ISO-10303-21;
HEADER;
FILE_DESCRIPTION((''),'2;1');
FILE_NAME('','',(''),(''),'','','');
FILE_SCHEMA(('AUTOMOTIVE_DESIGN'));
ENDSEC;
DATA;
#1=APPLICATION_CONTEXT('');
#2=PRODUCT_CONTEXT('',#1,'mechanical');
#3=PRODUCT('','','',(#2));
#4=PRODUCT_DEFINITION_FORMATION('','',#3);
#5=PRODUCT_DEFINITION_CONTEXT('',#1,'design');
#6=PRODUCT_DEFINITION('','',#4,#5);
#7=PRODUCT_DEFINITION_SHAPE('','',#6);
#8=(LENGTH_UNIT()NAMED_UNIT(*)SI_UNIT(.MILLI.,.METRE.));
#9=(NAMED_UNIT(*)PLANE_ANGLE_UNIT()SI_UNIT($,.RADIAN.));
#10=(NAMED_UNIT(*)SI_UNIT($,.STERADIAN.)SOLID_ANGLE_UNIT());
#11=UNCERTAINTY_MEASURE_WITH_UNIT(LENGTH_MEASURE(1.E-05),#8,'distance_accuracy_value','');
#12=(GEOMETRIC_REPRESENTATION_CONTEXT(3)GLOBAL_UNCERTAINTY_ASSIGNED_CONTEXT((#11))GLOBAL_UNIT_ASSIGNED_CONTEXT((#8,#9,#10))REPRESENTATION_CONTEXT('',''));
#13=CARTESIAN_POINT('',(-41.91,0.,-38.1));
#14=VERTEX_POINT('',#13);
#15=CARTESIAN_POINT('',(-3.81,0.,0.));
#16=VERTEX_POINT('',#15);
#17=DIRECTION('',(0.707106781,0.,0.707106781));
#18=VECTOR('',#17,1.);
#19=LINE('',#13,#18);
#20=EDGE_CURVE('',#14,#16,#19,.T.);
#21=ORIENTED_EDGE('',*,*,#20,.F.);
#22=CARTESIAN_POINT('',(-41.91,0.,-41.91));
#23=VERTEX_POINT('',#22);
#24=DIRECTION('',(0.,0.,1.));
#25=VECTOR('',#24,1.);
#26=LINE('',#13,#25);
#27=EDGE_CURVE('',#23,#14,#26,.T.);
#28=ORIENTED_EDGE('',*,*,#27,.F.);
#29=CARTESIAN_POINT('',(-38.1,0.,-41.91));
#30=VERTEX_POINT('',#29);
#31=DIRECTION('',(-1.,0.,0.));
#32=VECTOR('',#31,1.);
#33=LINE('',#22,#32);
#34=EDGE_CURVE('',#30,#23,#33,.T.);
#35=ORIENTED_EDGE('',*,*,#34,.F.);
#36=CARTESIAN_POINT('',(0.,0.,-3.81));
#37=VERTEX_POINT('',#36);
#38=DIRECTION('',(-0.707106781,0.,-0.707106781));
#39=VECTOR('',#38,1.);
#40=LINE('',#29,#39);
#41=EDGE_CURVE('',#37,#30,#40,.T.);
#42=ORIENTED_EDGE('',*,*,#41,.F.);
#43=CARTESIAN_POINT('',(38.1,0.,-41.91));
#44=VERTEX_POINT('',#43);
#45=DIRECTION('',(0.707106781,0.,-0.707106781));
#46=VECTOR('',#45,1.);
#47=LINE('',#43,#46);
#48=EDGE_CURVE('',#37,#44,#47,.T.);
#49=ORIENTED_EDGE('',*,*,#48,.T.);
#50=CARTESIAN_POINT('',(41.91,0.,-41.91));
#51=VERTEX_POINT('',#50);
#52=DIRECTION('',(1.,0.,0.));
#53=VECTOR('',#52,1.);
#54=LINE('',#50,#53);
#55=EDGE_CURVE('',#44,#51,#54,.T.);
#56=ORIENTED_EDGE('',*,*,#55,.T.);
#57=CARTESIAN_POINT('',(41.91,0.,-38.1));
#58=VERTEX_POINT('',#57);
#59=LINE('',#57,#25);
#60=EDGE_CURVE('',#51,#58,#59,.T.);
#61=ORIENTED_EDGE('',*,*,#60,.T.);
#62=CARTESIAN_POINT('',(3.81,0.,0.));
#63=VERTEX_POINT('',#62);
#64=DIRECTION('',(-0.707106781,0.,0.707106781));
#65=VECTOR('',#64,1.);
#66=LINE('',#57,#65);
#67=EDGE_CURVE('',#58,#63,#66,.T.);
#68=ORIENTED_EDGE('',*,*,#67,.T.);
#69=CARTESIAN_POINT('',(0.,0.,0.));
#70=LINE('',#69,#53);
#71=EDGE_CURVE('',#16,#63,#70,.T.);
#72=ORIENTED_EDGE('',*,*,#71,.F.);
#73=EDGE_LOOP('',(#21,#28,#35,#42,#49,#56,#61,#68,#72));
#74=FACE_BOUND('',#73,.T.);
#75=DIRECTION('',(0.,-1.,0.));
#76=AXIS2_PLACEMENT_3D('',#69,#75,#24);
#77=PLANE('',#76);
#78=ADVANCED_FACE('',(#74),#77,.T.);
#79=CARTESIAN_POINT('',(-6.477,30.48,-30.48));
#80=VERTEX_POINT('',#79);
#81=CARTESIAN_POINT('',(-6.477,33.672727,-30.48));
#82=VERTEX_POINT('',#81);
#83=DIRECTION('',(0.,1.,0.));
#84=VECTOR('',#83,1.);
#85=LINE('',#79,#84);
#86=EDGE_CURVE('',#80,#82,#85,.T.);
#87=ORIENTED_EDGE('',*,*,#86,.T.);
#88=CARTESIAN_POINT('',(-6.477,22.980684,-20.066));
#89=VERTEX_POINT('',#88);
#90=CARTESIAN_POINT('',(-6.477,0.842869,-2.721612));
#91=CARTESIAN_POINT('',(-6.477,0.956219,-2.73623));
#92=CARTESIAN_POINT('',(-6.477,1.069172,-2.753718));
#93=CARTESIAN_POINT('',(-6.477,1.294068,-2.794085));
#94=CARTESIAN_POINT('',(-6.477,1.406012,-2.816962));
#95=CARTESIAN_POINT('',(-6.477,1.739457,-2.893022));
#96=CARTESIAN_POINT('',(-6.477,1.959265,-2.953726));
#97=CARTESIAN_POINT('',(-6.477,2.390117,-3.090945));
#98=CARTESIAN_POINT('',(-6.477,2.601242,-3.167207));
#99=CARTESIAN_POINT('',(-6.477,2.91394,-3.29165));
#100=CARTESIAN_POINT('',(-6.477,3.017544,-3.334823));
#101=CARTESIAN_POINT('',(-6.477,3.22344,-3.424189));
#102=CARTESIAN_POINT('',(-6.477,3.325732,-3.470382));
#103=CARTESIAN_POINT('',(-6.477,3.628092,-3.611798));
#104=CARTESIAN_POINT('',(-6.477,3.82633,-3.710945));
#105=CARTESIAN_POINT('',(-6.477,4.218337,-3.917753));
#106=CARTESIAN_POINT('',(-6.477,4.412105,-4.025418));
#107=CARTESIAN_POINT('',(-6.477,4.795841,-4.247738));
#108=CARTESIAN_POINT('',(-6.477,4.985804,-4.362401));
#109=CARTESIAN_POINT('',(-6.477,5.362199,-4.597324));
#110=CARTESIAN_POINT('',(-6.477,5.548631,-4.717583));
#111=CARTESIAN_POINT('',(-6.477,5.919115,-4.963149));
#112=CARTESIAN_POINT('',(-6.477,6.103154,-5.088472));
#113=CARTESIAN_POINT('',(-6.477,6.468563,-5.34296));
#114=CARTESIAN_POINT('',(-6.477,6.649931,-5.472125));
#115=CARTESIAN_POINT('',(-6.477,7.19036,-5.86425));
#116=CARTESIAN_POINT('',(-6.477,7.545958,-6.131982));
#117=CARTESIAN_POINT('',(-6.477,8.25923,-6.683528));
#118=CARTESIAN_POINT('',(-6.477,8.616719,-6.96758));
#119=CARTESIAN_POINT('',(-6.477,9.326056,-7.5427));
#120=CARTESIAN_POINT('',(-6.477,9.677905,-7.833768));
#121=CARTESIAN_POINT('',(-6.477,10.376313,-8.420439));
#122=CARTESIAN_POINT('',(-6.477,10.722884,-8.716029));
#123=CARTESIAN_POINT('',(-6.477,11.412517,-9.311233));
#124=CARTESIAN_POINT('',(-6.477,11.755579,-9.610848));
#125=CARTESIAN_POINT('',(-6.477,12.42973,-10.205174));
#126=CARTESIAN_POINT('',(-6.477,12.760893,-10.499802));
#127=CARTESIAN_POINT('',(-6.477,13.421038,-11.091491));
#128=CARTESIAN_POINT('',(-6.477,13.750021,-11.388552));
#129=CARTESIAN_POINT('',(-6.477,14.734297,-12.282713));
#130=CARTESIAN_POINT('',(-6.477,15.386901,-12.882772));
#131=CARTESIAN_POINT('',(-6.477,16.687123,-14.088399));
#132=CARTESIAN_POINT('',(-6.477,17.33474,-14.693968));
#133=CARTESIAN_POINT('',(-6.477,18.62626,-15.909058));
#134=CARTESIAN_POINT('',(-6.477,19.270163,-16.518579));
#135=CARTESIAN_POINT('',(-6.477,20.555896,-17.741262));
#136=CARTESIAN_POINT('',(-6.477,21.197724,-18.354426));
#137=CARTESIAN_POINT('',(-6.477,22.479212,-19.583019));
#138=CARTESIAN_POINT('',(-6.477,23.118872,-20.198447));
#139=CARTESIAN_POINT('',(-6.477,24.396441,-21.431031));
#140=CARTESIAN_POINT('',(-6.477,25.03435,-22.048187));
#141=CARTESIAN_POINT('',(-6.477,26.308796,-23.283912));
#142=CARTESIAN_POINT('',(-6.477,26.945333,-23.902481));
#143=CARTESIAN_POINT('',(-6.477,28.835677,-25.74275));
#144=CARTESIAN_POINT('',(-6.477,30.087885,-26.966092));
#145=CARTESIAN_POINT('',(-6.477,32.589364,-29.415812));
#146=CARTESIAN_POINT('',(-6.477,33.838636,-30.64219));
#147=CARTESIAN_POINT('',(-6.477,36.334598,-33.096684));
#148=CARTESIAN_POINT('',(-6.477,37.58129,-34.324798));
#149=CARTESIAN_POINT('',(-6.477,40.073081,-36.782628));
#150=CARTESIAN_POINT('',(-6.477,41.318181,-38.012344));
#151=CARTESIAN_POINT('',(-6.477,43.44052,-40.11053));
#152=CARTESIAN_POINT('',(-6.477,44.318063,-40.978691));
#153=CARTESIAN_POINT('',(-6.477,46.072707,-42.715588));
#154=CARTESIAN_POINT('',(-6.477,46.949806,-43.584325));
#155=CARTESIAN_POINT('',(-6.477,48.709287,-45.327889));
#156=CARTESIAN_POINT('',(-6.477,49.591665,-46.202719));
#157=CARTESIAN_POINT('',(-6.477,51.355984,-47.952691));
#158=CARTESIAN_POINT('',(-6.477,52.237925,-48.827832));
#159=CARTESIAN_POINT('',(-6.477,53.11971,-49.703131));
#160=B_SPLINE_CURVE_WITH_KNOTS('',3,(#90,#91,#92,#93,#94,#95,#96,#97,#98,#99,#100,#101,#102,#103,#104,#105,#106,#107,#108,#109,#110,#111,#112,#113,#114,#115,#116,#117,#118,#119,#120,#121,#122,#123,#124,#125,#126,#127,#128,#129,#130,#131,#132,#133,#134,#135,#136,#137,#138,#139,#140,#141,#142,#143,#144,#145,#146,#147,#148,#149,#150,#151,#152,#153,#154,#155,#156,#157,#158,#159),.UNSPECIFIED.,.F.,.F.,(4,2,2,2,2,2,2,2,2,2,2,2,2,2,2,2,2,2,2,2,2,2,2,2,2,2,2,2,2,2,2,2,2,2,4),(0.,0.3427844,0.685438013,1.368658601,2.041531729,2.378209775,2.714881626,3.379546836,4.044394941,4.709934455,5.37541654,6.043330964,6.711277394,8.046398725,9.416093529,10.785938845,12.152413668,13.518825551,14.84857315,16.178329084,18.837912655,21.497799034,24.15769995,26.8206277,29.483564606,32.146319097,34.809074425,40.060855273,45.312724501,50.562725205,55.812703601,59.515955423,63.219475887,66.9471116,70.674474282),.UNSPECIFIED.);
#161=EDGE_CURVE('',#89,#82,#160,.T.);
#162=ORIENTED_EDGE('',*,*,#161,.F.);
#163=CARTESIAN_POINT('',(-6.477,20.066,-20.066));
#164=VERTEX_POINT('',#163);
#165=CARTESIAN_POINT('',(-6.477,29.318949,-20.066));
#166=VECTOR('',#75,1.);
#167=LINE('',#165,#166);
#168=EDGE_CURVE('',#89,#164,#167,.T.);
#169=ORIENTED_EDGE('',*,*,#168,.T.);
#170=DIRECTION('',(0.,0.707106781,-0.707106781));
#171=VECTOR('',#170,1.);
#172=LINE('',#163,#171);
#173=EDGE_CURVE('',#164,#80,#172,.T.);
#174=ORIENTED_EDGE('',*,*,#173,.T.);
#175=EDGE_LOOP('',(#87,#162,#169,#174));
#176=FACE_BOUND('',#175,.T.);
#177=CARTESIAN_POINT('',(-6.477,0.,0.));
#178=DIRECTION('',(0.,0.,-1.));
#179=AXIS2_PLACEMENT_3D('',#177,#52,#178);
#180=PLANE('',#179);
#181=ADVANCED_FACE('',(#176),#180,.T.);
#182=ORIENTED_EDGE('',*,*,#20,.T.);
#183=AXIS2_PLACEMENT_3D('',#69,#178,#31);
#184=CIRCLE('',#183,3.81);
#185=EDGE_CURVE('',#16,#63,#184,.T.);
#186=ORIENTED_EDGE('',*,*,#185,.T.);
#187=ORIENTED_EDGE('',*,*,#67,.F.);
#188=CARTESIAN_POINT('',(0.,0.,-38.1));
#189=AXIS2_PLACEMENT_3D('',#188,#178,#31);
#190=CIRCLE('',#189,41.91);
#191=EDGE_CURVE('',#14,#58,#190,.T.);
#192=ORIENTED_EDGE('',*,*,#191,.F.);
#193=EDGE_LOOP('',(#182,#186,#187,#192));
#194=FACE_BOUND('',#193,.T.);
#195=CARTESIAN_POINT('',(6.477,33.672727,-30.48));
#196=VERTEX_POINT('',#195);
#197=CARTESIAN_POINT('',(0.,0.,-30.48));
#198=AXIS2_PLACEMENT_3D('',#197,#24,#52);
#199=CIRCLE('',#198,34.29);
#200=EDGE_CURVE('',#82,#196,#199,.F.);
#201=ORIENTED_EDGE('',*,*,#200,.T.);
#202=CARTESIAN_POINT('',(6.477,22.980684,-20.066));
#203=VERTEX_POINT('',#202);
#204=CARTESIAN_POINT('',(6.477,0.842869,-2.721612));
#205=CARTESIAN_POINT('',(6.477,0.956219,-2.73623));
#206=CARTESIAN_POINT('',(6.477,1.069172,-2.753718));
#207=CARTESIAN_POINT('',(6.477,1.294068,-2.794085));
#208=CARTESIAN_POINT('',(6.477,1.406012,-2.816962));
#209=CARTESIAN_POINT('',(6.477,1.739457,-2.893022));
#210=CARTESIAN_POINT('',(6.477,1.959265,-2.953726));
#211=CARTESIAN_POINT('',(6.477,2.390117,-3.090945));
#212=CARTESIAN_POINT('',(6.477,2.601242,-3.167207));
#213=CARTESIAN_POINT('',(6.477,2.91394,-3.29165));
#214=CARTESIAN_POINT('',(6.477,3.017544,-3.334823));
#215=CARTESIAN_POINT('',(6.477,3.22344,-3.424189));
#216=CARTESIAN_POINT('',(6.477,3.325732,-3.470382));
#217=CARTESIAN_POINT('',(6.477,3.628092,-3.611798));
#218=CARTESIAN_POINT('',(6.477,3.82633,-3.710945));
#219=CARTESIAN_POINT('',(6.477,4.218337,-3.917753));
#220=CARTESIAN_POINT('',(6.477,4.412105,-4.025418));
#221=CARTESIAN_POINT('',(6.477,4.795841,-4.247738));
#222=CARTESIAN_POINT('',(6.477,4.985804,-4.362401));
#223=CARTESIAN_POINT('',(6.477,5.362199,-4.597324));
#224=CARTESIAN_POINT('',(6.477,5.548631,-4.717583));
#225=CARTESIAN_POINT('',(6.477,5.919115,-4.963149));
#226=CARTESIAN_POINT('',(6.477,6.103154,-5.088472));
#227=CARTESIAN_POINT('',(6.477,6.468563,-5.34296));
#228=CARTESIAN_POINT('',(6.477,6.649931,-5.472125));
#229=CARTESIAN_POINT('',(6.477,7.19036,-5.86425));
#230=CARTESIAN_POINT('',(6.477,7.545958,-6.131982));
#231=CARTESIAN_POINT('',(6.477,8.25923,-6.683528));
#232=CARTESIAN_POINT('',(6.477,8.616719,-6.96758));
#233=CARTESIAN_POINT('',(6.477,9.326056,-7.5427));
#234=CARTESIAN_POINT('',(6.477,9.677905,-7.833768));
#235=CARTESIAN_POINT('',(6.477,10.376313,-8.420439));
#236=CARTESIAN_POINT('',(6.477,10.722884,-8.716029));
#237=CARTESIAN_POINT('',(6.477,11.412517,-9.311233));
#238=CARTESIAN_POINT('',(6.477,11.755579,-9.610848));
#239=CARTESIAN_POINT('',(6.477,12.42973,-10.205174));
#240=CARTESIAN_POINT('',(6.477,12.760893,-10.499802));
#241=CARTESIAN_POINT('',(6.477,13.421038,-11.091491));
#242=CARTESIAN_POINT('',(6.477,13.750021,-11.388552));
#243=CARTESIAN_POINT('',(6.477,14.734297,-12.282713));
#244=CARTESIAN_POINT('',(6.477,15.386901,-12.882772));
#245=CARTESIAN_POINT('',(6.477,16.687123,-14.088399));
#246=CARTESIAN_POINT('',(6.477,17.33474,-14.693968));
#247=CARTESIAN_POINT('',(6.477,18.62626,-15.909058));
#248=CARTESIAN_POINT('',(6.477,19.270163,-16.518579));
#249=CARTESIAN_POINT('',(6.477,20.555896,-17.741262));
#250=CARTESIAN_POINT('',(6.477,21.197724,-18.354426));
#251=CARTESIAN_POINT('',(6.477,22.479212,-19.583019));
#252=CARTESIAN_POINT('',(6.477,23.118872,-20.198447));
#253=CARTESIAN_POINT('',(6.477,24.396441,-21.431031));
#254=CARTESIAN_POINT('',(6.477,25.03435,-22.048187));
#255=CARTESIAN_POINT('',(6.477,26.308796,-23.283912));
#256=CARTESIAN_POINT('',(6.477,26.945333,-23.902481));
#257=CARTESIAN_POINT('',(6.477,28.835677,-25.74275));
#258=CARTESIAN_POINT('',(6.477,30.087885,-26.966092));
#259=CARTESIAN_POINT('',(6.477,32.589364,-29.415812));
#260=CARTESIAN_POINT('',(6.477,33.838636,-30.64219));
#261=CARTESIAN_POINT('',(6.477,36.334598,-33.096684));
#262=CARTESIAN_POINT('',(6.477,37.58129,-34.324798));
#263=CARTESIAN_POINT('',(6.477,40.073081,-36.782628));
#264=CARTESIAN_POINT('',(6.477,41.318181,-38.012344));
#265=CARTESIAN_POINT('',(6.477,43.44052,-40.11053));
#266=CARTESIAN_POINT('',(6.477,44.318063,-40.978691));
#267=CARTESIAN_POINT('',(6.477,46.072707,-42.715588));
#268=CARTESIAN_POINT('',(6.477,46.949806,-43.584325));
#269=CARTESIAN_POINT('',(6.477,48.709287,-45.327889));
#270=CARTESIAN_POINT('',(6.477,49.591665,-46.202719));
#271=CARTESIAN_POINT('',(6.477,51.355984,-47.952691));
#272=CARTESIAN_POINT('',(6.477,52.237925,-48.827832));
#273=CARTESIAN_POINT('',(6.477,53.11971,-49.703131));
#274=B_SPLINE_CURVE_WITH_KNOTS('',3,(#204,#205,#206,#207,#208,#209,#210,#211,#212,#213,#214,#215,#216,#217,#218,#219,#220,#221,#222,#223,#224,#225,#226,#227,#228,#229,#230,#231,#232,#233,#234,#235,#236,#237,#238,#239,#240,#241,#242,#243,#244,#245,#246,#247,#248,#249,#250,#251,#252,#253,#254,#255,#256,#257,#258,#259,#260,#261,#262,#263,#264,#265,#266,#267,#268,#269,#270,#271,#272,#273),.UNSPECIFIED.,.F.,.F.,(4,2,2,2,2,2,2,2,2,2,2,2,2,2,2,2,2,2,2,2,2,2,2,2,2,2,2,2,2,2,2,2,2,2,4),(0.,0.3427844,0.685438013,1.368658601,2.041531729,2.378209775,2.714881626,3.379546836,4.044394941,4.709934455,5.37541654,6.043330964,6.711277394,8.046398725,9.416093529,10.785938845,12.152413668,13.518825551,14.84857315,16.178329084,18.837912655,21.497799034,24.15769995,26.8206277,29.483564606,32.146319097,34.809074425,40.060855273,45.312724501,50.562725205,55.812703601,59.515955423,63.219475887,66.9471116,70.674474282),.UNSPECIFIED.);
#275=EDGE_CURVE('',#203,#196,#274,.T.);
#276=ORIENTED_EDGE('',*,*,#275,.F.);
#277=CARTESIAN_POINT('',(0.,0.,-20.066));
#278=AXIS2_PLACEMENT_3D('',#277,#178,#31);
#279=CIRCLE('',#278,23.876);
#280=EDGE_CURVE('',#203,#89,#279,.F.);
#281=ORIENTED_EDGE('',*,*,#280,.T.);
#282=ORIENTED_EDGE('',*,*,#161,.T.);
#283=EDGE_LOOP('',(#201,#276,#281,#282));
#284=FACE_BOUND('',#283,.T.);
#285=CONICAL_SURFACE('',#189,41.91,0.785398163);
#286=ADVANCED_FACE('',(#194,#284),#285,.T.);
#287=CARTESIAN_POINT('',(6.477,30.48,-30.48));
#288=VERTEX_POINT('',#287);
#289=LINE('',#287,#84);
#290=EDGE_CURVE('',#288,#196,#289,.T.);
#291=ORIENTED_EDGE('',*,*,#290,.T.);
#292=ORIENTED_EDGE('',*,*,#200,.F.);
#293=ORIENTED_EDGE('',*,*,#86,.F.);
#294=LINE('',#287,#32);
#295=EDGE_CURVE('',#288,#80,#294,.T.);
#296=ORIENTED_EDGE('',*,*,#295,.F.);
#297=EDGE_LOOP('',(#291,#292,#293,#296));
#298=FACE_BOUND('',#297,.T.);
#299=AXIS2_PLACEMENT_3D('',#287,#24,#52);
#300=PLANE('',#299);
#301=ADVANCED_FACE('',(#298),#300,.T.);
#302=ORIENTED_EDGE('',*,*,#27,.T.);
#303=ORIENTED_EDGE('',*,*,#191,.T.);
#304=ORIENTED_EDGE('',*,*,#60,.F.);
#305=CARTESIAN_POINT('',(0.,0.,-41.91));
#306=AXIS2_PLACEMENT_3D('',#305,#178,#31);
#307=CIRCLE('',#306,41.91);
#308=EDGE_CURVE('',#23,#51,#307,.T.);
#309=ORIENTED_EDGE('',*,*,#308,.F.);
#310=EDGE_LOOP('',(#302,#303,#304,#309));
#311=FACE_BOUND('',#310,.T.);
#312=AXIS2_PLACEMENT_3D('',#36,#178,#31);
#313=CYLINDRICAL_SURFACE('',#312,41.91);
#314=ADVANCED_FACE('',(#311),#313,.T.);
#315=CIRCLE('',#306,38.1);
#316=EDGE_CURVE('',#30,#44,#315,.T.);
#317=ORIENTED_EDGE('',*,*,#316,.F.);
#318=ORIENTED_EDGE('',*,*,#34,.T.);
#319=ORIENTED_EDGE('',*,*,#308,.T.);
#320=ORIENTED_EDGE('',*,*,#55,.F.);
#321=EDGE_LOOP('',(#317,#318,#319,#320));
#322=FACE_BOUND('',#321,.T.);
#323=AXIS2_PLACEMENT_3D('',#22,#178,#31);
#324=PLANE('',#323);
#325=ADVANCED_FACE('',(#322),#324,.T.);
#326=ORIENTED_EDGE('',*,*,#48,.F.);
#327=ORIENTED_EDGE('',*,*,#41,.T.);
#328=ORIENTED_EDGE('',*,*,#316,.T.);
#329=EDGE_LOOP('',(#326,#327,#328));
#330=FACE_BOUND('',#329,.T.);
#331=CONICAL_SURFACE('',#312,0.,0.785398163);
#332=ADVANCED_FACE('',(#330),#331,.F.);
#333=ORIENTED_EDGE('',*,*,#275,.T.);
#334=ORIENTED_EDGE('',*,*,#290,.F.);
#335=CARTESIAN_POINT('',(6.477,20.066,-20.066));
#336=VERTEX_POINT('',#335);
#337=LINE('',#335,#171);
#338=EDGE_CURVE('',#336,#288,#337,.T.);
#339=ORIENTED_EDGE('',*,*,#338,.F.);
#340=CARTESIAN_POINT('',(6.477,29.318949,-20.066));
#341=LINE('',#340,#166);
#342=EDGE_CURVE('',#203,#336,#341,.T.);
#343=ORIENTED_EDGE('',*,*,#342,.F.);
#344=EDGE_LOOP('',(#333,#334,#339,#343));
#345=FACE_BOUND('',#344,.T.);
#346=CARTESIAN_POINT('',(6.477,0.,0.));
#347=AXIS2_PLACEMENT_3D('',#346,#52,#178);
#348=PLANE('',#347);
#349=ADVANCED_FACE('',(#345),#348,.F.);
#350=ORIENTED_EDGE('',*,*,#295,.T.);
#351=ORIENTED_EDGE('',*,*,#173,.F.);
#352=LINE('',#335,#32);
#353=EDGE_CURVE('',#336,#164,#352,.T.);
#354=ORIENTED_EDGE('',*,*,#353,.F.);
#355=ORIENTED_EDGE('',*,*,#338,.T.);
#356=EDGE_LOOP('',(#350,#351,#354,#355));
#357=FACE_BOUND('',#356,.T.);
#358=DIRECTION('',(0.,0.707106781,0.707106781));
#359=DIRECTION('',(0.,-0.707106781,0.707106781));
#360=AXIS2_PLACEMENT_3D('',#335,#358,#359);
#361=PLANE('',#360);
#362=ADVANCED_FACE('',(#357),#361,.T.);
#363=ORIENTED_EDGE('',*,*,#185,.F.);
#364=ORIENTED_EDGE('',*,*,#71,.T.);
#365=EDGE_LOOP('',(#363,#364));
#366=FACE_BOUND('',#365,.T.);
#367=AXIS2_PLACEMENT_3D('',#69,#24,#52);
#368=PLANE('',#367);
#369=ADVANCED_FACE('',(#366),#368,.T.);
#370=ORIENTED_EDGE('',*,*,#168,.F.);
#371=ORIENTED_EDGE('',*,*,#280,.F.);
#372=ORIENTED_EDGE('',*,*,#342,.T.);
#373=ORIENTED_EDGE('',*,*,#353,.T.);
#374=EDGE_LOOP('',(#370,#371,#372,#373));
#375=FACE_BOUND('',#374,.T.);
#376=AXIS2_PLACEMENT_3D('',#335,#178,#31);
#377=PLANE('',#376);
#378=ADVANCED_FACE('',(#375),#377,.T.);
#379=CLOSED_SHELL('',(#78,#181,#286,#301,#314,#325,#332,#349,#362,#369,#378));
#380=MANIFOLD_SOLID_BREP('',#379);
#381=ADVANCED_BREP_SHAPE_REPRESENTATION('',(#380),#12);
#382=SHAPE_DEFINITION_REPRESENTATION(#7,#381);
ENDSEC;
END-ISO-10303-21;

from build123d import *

# Parameters (mm, degrees)
REVOLVE2_ANGLE          = 180
CUT_EXTRUDE1_DEPTH      = 6.477
CUT_EXTRUDE1_DEPTH_BACK = 6.477


# Read off the part's stored shape, not the designer's step: Revolve2
with BuildPart() as part:
    # Revolve2 outline → Revolve2 (revolve)
    with BuildSketch(Plane.XZ):
        Polygon((3.81, 0), (0, 0), (0, -3.81), (38.1, -41.91), (41.91, -41.91), (41.91, -38.1), align=None)
    revolve(axis=Axis((0, 0, 0), (0, 0, 1)), revolution_arc=REVOLVE2_ANGLE)

    # Sketch6 → Cut-Extrude1 (cut, two sides: drawn at the far end of the back side and taken through both)
    with BuildSketch(Plane(origin=(0, 0, 0), x_dir=(0, 0, -1), z_dir=(1, 0, 0)).offset(-CUT_EXTRUDE1_DEPTH_BACK)):
        Polygon((20.066, 20.066), (20.066, 29.318948776), (20.066, 36.223650293), (30.48, 36.223650293), (30.48, 30.48), align=None)
    extrude(amount=CUT_EXTRUDE1_DEPTH + CUT_EXTRUDE1_DEPTH_BACK, mode=Mode.SUBTRACT)


solid = part.part
